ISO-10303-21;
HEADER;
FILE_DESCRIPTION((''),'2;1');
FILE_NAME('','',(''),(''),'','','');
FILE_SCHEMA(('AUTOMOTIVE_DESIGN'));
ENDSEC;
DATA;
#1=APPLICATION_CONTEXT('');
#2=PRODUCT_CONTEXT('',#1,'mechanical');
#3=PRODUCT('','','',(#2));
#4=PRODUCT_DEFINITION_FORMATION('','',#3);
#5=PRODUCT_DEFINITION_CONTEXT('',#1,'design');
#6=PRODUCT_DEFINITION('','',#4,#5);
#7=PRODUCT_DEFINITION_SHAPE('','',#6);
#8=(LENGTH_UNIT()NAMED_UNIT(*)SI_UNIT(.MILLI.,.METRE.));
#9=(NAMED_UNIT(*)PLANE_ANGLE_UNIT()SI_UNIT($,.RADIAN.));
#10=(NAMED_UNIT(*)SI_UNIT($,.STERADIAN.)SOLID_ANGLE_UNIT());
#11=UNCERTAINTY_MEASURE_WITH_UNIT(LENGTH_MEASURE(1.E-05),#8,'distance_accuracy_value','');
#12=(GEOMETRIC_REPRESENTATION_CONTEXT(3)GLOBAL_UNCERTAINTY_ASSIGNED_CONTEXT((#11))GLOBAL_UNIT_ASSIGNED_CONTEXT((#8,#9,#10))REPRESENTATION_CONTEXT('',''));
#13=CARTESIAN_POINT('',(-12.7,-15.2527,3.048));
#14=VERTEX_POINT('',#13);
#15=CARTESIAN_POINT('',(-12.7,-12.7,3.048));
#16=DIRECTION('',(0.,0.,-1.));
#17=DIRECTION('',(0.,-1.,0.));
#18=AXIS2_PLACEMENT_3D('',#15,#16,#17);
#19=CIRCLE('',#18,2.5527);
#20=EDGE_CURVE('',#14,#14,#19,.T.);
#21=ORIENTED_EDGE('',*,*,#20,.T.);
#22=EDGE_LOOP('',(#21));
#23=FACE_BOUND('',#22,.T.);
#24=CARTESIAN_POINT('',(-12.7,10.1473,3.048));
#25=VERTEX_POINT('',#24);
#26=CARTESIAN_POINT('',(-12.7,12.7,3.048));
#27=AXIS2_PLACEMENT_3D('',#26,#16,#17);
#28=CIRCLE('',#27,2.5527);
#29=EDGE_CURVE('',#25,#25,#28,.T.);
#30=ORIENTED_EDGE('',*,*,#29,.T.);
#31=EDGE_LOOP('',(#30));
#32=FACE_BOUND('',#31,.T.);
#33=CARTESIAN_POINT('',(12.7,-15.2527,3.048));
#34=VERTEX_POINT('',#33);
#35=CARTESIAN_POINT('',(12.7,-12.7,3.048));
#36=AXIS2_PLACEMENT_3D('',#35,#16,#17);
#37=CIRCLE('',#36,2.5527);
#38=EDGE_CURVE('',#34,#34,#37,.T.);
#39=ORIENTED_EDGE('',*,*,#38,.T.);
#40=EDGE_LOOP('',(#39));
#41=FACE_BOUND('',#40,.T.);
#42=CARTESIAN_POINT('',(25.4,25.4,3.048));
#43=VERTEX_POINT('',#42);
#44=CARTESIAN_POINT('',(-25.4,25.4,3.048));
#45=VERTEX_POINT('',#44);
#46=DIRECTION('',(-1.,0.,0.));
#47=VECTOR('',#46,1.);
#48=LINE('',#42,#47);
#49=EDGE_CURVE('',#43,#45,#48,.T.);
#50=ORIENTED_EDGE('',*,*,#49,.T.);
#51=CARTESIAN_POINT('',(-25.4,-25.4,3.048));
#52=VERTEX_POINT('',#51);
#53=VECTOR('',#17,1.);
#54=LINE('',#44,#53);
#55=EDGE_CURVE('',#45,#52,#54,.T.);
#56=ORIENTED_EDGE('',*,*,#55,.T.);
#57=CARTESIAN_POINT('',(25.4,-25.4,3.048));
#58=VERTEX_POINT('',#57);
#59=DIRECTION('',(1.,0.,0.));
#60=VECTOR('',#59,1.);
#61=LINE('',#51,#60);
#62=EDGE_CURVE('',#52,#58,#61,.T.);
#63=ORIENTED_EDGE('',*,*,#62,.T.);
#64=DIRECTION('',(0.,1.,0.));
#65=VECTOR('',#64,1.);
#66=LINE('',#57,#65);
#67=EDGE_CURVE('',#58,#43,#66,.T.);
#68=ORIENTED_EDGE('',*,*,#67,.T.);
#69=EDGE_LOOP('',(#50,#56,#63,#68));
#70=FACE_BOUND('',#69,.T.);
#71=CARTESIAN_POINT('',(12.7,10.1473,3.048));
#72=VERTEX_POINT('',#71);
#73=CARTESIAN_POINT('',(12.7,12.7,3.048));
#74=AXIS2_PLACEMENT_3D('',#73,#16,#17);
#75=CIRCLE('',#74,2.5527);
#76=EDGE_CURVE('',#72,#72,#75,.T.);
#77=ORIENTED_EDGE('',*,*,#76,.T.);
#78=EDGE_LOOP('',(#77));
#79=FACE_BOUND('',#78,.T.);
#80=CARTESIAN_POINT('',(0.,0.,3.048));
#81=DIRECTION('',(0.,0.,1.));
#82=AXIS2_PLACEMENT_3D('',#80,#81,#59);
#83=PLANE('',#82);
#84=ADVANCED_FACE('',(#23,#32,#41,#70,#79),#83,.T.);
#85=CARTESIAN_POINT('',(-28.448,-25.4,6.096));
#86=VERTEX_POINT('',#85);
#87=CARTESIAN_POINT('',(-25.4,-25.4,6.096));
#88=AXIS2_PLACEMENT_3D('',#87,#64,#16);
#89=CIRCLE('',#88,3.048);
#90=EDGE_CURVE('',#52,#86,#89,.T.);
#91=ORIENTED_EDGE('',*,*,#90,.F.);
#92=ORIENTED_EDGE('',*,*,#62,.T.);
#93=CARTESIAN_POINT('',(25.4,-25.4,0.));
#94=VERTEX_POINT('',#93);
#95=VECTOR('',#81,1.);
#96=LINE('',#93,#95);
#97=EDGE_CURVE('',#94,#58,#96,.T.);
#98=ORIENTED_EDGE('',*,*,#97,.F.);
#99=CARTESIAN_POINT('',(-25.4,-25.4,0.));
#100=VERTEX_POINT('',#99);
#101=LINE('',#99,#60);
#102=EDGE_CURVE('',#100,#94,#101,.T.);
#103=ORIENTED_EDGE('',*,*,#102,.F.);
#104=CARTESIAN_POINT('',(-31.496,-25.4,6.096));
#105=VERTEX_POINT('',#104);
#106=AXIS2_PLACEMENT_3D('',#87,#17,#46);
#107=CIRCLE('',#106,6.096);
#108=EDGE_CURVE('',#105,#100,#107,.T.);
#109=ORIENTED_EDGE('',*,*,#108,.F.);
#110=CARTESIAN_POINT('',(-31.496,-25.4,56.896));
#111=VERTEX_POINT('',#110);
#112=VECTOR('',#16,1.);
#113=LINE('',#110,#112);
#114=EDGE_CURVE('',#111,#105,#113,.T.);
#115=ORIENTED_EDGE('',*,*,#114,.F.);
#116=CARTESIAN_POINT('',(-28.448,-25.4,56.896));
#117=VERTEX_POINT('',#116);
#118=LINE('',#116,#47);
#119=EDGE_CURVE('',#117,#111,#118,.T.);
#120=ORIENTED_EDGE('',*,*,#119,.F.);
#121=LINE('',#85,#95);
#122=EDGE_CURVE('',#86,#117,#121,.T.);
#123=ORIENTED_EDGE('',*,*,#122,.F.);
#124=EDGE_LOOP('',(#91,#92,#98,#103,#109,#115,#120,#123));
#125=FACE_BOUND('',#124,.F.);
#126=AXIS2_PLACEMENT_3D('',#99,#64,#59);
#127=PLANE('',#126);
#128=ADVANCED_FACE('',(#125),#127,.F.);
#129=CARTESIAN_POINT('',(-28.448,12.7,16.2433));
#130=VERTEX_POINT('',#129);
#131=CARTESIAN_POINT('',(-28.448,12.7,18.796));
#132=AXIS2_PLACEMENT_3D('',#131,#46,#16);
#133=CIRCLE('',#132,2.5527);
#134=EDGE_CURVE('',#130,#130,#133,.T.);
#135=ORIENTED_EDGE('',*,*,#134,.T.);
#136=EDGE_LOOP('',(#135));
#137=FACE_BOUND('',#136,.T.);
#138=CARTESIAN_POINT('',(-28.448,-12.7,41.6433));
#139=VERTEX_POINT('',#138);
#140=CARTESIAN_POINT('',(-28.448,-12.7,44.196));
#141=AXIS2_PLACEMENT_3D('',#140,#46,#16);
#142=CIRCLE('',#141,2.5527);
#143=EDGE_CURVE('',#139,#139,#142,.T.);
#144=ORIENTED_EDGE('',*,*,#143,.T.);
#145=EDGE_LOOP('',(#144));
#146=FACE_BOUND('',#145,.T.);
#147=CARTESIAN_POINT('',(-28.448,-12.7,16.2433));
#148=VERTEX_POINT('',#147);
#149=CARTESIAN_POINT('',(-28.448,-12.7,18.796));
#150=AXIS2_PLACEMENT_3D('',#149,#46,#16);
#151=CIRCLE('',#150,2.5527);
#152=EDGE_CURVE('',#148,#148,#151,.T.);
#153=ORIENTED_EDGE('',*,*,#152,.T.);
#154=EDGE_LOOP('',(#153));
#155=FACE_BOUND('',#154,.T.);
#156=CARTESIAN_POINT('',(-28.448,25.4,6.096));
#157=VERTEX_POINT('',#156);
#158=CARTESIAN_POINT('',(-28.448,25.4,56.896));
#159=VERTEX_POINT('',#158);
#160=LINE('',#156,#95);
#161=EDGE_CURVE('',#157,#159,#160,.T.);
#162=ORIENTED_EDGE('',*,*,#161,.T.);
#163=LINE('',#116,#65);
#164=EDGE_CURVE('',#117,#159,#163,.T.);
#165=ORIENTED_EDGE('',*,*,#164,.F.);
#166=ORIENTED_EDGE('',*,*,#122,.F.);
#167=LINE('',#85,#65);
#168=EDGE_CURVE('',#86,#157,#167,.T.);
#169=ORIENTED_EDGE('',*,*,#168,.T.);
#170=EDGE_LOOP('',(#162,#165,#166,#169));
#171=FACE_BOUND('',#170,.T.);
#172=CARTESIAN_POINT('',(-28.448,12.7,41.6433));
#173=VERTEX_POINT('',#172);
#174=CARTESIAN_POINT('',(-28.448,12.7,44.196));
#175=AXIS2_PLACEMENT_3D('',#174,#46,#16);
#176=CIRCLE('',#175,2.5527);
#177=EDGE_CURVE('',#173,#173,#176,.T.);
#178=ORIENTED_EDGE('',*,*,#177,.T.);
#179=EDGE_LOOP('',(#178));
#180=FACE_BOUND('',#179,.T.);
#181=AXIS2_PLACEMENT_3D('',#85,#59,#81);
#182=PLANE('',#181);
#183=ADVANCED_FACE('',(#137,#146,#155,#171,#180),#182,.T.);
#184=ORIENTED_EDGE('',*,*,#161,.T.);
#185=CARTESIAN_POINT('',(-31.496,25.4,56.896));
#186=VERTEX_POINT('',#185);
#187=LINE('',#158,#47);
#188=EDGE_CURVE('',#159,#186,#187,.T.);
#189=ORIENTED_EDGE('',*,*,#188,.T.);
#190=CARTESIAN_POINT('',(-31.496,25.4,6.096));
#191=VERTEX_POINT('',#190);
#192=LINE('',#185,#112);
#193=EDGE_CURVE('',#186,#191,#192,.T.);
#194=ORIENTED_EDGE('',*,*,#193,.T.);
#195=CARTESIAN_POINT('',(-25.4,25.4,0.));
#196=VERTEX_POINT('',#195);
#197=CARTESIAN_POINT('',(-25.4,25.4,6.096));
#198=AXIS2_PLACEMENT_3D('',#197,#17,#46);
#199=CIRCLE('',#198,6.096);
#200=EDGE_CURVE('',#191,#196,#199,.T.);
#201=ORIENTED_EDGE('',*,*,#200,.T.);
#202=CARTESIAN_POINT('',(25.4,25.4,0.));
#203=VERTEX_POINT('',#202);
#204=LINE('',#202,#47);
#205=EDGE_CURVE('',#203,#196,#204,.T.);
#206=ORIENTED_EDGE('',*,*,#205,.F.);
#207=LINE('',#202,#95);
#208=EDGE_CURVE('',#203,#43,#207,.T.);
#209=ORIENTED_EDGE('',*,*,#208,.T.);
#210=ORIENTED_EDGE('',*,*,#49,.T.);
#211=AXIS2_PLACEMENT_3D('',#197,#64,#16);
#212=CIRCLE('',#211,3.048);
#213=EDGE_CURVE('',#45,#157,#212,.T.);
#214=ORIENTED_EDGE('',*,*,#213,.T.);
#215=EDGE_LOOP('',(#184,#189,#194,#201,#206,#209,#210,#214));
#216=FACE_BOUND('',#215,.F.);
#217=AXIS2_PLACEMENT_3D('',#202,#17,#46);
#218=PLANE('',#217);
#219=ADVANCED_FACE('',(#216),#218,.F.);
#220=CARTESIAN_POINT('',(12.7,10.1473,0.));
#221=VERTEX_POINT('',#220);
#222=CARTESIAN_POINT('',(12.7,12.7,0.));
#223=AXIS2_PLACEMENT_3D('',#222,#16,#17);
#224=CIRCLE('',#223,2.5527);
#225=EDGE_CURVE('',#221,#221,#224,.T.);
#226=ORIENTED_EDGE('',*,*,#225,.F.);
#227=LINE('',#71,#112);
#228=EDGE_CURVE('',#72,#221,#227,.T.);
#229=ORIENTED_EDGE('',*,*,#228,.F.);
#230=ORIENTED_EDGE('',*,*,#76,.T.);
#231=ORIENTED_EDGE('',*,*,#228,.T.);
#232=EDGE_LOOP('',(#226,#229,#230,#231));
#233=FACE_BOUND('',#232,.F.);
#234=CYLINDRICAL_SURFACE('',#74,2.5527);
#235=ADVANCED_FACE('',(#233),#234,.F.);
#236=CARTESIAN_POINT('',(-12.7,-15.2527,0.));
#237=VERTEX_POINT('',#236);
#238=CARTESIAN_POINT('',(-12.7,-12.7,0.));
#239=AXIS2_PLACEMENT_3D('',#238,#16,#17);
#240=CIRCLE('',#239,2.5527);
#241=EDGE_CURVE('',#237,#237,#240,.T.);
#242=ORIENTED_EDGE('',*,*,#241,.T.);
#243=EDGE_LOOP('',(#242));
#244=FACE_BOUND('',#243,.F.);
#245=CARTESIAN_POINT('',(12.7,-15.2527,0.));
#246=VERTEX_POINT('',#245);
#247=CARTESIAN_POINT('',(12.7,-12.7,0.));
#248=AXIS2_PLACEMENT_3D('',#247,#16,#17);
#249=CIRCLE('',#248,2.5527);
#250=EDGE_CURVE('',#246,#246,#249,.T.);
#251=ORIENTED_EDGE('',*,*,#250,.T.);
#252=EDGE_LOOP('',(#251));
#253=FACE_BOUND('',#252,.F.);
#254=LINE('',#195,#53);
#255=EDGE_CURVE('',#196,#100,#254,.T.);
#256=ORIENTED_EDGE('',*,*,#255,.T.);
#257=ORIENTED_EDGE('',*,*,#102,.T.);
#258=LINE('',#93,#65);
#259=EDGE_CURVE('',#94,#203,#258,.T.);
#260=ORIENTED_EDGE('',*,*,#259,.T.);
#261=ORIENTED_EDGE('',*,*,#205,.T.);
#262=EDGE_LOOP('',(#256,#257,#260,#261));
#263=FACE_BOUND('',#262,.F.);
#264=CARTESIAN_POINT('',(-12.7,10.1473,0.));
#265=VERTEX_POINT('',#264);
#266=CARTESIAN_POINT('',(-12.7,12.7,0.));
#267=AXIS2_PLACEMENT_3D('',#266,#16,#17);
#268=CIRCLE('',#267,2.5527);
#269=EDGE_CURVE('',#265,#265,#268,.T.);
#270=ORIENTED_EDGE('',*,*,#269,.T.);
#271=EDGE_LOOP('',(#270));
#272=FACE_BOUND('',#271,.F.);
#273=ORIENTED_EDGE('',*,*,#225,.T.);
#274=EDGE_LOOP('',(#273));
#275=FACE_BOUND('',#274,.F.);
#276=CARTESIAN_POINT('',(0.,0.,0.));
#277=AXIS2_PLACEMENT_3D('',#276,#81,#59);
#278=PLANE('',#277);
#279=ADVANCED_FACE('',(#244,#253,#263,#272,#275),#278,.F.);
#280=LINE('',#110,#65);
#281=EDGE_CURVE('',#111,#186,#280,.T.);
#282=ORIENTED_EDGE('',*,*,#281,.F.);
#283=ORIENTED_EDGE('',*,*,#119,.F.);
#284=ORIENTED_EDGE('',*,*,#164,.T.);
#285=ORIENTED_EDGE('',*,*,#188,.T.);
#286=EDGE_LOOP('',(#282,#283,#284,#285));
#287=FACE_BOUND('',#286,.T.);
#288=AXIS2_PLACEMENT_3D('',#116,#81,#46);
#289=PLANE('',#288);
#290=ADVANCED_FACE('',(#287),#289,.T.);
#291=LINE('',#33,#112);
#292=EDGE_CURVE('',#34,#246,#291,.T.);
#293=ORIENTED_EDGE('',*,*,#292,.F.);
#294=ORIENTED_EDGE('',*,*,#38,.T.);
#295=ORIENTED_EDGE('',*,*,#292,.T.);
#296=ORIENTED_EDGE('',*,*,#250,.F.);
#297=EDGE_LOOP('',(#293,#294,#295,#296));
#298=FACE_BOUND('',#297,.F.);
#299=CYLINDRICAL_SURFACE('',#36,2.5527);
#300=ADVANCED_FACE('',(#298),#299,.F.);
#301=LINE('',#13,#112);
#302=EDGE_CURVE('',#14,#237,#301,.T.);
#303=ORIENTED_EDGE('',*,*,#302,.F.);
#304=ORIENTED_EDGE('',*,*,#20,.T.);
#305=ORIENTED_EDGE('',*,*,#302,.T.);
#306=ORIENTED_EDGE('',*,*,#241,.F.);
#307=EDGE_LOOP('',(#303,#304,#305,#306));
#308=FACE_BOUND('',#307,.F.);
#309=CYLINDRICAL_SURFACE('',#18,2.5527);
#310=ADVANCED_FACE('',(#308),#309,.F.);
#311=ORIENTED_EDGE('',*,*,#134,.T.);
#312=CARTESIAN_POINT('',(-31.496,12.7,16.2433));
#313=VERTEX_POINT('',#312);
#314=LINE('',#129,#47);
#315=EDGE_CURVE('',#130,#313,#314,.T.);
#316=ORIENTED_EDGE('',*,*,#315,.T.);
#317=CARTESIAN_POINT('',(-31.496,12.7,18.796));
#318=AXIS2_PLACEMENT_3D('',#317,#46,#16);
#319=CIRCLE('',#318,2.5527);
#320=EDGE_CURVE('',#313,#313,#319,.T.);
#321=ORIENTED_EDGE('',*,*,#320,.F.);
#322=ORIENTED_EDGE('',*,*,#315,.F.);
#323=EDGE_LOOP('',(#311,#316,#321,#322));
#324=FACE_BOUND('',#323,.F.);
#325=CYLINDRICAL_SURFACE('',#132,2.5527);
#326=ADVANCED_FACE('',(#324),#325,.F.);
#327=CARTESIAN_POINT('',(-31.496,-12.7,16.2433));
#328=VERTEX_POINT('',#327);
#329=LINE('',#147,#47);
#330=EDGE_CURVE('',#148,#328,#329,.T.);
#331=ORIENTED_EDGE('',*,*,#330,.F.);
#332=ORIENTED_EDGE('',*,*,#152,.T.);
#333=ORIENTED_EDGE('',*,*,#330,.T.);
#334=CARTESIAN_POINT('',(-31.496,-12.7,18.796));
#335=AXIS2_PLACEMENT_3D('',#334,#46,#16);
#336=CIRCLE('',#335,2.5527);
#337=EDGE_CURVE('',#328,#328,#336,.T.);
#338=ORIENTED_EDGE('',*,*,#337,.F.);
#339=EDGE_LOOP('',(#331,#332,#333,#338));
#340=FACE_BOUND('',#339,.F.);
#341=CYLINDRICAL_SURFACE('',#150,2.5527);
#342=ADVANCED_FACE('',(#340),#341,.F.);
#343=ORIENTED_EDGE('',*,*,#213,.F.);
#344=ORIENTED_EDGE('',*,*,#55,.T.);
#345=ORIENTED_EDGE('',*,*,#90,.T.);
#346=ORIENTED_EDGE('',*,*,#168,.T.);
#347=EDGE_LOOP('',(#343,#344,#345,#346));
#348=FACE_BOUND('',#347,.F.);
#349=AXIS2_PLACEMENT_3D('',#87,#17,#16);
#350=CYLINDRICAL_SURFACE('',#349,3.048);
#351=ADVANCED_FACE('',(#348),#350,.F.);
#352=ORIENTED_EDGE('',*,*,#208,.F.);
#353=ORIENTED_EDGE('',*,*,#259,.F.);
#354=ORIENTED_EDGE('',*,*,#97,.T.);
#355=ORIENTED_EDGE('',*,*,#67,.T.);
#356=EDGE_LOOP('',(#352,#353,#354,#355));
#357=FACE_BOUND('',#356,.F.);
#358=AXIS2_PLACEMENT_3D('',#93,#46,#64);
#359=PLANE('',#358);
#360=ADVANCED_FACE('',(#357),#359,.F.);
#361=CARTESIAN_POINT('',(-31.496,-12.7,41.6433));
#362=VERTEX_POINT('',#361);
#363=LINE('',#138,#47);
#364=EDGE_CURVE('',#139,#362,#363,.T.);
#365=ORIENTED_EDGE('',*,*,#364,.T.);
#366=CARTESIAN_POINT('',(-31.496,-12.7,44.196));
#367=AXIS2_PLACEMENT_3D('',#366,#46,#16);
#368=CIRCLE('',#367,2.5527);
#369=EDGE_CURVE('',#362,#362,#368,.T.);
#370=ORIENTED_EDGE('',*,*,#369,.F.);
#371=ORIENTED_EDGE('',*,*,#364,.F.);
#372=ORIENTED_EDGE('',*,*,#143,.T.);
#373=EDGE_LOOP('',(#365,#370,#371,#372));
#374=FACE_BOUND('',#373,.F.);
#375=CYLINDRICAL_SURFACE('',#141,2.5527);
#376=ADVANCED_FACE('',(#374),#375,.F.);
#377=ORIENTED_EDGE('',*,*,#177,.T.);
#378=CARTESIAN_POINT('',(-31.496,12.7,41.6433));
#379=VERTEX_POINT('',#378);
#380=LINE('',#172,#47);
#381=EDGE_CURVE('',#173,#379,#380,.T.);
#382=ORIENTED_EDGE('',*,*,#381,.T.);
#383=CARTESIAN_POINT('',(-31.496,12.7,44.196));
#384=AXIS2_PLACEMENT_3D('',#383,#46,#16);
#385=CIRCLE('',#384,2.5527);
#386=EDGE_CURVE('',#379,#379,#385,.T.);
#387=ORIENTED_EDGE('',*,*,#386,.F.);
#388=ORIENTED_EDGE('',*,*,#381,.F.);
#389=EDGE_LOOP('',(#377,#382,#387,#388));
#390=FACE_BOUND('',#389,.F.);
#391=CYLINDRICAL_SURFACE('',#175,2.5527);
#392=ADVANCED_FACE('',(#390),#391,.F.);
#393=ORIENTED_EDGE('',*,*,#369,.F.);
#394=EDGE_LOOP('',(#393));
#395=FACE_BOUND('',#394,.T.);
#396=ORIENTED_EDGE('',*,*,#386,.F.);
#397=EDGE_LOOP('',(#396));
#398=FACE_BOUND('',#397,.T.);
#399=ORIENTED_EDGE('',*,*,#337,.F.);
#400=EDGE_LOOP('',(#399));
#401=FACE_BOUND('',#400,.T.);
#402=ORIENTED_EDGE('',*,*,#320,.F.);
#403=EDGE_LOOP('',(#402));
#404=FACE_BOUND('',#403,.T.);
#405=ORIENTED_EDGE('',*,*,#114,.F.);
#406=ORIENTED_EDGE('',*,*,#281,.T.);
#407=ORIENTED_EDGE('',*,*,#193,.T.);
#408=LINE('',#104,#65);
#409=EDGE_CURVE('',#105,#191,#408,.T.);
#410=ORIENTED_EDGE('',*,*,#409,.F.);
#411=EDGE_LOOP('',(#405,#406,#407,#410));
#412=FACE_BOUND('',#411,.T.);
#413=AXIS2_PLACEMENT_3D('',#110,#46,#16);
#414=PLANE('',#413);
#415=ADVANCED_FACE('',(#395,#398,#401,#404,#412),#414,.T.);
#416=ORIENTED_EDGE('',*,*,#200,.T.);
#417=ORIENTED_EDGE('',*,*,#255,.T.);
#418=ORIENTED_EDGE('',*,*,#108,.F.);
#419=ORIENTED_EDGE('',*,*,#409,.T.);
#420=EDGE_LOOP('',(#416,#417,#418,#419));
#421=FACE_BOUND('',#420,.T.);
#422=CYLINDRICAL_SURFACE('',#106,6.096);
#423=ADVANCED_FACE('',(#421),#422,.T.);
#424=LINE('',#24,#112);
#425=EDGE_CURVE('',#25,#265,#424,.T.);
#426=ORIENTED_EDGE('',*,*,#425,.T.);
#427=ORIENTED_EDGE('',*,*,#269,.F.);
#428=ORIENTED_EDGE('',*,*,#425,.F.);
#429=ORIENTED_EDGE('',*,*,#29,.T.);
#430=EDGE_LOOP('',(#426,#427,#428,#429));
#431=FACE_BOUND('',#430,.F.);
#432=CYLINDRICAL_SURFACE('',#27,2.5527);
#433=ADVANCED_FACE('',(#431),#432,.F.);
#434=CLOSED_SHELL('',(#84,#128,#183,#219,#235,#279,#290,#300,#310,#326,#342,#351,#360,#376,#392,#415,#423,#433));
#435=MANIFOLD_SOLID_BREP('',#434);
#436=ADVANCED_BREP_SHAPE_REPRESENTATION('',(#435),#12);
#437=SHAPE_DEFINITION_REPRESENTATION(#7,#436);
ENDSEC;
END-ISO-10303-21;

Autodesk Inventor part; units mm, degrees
ref_plane "YZ Plane" through (0, 0, 0) normal (1, 0, 0) x (0, 1, 0)
ref_plane "XZ Plane" through (0, 0, 0) normal (0, 1, 0) x (-1, 0, 0)
ref_plane "XY Plane" through (0, 0, 0) normal (0, 0, 1) x (1, 0, 0)
sketch "Sketch1" plane through (0, 0, 0) normal (0, 0, 1) x (1, 0, 0)
  line L0 (25.4, 25.4) -> (-25.4, 25.4)
  line L1 (-25.4, 25.4) -> (-25.4, -25.4)
  line L2 (-25.4, -25.4) -> (25.4, -25.4)
  line L3 (25.4, -25.4) -> (25.4, 25.4)
  line L4 (25.4, 25.4) -> (-25.4, -25.4) construction
  line L5 (-25.4, 25.4) -> (25.4, -25.4) construction
  point P0 (0, 0)
  dimension "d0" = 50.8
  dimension "d1" = 50.8
extrude "Plate1" add sketch "Sketch1" along normal blind 3.048
sketch "Sketch2" plane through (-28.448, -25.4, 6.096) normal (-1, 0, 0) x (0, -1, 0)
  line L0 (-50.8, 0) -> (0, 0)
  line L1 (0, 0) -> (0, 50.8)
  line L2 (0, 50.8) -> (-50.8, 50.8)
  line L3 (-50.8, 50.8) -> (-50.8, 0)
edge flange "Flange1" height 56.896 angle 90 thickness 3.048 bend radius 3.048 thickness toward (-1, 0, 0) relief tear relief width 3.048 relief depth 1.524 edges at (-25.4, 0, 3.048) wall of the first edge with corners at (-28.448, 25.4, 6.096) (-28.448, -25.4, 6.096) (-28.448, -25.4, 56.896) (-28.448, 25.4, 56.896)
bend "Bend1"
corner "Corner1"
sketch "Sketch3" plane through (-28.448, -25.4, 56.896) normal (1, 0, 0) x (0, 0, -1)
  line L0 (50.8, 0) -> (50.8, 50.8) construction
  line L1 (0, 50.8) -> (50.8, 50.8) construction
  line L2 (0, 50.8) -> (0, 0) construction
  line L3 (0, 0) -> (50.8, 0) construction
  point P0 (56.896, 25.4)
  point P1 (38.1, 38.1)
  point P2 (38.1, 12.7)
  point P3 (12.7, 38.1)
  point P4 (12.7, 12.7)
  dimension "d13" = 12.7
  dimension "d14" = 12.7
  dimension "d17" = 25.4
  dimension "d20" = 25.4
hole "Hole1" at (-28.448, 12.7, 18.796) at (-28.448, -12.7, 18.796) at (-28.448, 12.7, 44.196) at (-28.448, -12.7, 44.196) direction (-1, 0, 0) diameter 5.1054 end through all clearance for "Flat Head Machine Screw (82)" size "#10" standard "Ansi Unified Screw Threads"
sketch "Sketch4" plane through (0, 0, 3.048) normal (0, 0, 1) x (1, 0, 0)
  line L0 (-25.4, 25.4) -> (25.4, 25.4) construction
  line L1 (-25.4, -25.4) -> (-25.4, 25.4) construction
  line L2 (25.4, -25.4) -> (-25.4, -25.4) construction
  line L3 (25.4, 25.4) -> (25.4, -25.4) construction
  point P0 (0, 0)
  point P1 (-12.7, 12.7)
  point P2 (12.7, 12.7)
  point P3 (-12.7, -12.7)
  point P4 (12.7, -12.7)
  dimension "d30" = 12.7
  dimension "d31" = 12.7
  dimension "d34" = 25.4
  dimension "d37" = 25.4
hole "Hole2" at (-12.7, 12.7, 3.048) at (12.7, 12.7, 3.048) at (-12.7, -12.7, 3.048) at (12.7, -12.7, 3.048) direction (0, 0, -1) diameter 5.1054 end through all clearance for "Flat Head Machine Screw (82)" size "#10" standard "Ansi Unified Screw Threads"
equation "\"d28\" = Thickness"
equation "\"d2\" = Thickness"
equation "\"d3\" = BendReliefWidth"
equation "\"d4\" = BendReliefDepth"
equation "\"d5\" = MinimumRemnant"
equation "\"d6\" = TransitionRadius"
equation "\"d9\" = BendRadius"
equation "\"d10\" = CornerReliefSize"
equation "\"d11\" = GapSize"
equation "\"d12\" = JacobiRadiusSize"
equation "\"BendRadius\" = Thickness"
equation "\"BendReliefWidth\" = Thickness"
equation "\"BendReliefDepth\" = 0.5 * Thickness"
equation "\"CornerReliefSize\" = 4 * Thickness"
equation "\"MinimumRemnant\" = 2 * Thickness"
equation "\"TransitionRadius\" = BendRadius"
equation "\"JacobiRadiusSize\" = BendRadius"
equation "\"GapSize\" = Thickness"
equation "\"Thickness\" = 3.048"
properties part number "hopper_side_barcket"
